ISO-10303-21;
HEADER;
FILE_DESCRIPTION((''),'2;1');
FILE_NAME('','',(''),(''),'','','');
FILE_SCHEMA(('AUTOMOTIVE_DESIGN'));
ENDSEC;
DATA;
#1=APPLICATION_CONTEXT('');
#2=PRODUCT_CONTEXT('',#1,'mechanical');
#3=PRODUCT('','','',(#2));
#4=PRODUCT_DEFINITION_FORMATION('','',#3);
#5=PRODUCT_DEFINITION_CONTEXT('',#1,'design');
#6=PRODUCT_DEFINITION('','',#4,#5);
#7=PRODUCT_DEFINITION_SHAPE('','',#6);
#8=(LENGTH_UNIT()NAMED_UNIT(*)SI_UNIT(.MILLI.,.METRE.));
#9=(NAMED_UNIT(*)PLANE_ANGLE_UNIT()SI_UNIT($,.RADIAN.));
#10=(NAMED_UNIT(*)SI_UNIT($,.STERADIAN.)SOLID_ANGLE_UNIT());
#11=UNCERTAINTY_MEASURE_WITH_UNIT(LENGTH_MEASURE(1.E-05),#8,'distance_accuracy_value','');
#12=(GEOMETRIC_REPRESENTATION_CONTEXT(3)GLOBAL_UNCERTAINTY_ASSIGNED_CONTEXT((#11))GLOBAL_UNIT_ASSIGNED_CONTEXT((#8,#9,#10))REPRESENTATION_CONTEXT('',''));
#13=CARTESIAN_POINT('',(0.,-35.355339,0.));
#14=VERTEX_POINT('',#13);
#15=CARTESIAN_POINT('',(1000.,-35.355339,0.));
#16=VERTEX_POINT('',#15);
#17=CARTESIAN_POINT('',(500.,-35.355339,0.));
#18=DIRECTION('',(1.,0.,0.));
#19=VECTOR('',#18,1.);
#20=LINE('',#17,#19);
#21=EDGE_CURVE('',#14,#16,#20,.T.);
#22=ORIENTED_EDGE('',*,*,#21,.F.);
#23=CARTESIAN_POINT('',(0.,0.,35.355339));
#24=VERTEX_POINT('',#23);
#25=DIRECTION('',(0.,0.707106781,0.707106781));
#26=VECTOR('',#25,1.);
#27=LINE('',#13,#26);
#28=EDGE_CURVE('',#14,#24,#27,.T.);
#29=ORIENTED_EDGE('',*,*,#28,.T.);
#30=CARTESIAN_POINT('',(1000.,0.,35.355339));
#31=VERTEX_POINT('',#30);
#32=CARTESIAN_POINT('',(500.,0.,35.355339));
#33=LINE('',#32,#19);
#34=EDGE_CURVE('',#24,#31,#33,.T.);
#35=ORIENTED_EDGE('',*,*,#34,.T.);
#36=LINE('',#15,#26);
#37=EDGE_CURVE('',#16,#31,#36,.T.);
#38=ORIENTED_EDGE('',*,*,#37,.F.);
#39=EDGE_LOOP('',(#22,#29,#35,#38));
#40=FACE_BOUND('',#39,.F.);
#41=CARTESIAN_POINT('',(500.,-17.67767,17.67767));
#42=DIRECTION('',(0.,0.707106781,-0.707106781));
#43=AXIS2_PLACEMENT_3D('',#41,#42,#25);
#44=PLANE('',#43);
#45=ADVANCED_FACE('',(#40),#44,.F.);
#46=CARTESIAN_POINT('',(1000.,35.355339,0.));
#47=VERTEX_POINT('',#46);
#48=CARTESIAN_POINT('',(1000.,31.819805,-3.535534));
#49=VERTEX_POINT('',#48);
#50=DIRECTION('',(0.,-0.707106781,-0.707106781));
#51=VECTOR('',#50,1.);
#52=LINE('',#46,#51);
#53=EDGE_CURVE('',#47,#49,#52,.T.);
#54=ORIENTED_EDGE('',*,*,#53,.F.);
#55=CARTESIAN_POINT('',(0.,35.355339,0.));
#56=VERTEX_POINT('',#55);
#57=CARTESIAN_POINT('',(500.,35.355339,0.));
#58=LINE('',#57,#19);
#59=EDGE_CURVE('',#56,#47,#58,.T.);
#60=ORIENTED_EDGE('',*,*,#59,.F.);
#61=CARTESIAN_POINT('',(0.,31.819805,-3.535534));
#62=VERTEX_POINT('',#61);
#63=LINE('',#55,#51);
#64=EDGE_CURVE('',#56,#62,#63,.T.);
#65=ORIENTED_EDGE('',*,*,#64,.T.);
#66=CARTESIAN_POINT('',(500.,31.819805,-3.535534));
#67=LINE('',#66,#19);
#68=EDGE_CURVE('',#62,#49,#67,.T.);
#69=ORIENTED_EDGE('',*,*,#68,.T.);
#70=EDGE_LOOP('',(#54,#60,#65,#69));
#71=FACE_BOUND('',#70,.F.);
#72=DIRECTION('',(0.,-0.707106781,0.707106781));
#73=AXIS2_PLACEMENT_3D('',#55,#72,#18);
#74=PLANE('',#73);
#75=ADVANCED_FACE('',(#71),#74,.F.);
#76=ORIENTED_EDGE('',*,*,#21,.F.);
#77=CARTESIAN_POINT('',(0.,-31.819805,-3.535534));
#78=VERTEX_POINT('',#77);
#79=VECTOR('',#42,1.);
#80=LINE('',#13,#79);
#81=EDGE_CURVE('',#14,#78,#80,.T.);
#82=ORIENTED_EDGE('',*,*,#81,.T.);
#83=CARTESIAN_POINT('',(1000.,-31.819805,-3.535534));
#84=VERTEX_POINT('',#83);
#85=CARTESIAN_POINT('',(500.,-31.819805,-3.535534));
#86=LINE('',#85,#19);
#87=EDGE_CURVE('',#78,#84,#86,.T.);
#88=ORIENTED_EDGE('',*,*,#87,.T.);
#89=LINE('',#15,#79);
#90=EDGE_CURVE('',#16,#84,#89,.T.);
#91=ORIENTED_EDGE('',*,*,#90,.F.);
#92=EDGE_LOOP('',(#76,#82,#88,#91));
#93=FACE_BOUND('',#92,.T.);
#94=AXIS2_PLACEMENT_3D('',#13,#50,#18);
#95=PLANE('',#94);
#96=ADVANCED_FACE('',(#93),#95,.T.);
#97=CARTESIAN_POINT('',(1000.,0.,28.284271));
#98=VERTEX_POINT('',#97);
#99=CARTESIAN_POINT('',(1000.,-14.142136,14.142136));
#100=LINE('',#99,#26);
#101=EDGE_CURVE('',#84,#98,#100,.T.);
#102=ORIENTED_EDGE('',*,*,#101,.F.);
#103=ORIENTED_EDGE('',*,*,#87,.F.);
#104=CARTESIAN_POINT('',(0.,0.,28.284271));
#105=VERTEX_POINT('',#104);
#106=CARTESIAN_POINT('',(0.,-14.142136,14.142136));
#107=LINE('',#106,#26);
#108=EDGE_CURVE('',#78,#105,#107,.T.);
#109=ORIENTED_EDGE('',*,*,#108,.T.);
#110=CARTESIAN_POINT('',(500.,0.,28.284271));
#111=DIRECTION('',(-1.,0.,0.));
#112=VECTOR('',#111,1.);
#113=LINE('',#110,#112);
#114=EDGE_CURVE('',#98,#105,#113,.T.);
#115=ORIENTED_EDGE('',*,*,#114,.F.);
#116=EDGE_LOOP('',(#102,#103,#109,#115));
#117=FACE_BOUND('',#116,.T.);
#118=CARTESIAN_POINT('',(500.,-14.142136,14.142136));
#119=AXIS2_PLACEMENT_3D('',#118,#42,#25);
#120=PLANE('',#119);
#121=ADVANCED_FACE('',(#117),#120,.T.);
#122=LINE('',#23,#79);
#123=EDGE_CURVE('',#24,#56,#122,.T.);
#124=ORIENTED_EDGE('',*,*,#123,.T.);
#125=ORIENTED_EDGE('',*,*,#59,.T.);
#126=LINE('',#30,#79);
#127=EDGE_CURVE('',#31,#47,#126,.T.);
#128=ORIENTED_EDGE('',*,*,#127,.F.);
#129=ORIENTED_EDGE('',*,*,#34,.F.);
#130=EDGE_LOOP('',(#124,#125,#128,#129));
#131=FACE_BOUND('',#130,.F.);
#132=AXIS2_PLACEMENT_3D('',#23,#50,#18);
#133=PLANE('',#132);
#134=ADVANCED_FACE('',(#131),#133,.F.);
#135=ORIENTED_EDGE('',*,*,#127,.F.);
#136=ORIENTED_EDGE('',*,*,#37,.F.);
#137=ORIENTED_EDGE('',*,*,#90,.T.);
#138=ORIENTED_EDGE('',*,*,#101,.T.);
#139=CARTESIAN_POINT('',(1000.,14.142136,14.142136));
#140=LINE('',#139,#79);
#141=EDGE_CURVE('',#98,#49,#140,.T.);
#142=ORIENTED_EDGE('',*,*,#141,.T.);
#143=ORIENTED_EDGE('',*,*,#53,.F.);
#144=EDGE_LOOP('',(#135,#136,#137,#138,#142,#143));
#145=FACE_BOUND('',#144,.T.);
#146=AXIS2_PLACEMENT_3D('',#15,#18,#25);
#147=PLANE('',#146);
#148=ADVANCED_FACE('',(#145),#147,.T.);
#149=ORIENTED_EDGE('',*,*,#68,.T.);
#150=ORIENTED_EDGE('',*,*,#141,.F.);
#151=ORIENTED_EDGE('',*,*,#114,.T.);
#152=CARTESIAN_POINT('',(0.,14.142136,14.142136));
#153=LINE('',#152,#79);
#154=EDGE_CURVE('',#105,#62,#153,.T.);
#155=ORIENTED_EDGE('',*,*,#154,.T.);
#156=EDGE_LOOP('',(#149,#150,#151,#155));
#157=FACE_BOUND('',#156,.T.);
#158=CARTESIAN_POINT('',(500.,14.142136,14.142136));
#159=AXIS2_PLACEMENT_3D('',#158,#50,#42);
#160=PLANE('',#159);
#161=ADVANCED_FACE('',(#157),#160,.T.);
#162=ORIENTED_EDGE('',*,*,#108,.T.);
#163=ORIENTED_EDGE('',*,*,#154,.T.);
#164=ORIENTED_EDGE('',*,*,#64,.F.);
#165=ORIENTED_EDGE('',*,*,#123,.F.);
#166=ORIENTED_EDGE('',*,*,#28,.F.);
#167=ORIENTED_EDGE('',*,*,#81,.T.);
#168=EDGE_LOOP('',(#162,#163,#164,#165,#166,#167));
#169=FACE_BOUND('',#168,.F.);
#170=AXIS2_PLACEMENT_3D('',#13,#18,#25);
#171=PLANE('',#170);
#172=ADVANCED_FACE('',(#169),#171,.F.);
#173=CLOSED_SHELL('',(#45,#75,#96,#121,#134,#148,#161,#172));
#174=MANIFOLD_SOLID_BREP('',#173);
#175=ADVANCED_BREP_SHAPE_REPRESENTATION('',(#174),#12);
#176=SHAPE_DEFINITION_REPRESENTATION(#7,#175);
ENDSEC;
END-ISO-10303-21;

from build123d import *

# Parameters (mm, degrees)
F1_E0_W  = 50
F1_E0_H  = 1000
F2_DEPTH = 5
F1_E1_W  = 50
F1_E1_H  = 1000
F3_DEPTH = 5


with BuildPart() as f2:
    # F1_E0 (on explicit) → F2 (new body)
    with BuildSketch(Plane(origin=(0, -35.3553390593, 0), x_dir=(0, 0.7071067812, 0.7071067812), z_dir=(0, 0.7071067812, -0.7071067812))):
        with Locations((25, 500)):
            Rectangle(F1_E0_W, F1_E0_H)
    extrude(amount=F2_DEPTH)

    # F1_E1 (on explicit) → F3 (join)
    with BuildSketch(Plane(origin=(0, 0, 35.3553390593), x_dir=(0, 0.7071067812, -0.7071067812), z_dir=(0, -0.7071067812, -0.7071067812))):
        with Locations((25, 500)):
            Rectangle(F1_E1_W, F1_E1_H)
    extrude(amount=F3_DEPTH)


solid = f2.part
